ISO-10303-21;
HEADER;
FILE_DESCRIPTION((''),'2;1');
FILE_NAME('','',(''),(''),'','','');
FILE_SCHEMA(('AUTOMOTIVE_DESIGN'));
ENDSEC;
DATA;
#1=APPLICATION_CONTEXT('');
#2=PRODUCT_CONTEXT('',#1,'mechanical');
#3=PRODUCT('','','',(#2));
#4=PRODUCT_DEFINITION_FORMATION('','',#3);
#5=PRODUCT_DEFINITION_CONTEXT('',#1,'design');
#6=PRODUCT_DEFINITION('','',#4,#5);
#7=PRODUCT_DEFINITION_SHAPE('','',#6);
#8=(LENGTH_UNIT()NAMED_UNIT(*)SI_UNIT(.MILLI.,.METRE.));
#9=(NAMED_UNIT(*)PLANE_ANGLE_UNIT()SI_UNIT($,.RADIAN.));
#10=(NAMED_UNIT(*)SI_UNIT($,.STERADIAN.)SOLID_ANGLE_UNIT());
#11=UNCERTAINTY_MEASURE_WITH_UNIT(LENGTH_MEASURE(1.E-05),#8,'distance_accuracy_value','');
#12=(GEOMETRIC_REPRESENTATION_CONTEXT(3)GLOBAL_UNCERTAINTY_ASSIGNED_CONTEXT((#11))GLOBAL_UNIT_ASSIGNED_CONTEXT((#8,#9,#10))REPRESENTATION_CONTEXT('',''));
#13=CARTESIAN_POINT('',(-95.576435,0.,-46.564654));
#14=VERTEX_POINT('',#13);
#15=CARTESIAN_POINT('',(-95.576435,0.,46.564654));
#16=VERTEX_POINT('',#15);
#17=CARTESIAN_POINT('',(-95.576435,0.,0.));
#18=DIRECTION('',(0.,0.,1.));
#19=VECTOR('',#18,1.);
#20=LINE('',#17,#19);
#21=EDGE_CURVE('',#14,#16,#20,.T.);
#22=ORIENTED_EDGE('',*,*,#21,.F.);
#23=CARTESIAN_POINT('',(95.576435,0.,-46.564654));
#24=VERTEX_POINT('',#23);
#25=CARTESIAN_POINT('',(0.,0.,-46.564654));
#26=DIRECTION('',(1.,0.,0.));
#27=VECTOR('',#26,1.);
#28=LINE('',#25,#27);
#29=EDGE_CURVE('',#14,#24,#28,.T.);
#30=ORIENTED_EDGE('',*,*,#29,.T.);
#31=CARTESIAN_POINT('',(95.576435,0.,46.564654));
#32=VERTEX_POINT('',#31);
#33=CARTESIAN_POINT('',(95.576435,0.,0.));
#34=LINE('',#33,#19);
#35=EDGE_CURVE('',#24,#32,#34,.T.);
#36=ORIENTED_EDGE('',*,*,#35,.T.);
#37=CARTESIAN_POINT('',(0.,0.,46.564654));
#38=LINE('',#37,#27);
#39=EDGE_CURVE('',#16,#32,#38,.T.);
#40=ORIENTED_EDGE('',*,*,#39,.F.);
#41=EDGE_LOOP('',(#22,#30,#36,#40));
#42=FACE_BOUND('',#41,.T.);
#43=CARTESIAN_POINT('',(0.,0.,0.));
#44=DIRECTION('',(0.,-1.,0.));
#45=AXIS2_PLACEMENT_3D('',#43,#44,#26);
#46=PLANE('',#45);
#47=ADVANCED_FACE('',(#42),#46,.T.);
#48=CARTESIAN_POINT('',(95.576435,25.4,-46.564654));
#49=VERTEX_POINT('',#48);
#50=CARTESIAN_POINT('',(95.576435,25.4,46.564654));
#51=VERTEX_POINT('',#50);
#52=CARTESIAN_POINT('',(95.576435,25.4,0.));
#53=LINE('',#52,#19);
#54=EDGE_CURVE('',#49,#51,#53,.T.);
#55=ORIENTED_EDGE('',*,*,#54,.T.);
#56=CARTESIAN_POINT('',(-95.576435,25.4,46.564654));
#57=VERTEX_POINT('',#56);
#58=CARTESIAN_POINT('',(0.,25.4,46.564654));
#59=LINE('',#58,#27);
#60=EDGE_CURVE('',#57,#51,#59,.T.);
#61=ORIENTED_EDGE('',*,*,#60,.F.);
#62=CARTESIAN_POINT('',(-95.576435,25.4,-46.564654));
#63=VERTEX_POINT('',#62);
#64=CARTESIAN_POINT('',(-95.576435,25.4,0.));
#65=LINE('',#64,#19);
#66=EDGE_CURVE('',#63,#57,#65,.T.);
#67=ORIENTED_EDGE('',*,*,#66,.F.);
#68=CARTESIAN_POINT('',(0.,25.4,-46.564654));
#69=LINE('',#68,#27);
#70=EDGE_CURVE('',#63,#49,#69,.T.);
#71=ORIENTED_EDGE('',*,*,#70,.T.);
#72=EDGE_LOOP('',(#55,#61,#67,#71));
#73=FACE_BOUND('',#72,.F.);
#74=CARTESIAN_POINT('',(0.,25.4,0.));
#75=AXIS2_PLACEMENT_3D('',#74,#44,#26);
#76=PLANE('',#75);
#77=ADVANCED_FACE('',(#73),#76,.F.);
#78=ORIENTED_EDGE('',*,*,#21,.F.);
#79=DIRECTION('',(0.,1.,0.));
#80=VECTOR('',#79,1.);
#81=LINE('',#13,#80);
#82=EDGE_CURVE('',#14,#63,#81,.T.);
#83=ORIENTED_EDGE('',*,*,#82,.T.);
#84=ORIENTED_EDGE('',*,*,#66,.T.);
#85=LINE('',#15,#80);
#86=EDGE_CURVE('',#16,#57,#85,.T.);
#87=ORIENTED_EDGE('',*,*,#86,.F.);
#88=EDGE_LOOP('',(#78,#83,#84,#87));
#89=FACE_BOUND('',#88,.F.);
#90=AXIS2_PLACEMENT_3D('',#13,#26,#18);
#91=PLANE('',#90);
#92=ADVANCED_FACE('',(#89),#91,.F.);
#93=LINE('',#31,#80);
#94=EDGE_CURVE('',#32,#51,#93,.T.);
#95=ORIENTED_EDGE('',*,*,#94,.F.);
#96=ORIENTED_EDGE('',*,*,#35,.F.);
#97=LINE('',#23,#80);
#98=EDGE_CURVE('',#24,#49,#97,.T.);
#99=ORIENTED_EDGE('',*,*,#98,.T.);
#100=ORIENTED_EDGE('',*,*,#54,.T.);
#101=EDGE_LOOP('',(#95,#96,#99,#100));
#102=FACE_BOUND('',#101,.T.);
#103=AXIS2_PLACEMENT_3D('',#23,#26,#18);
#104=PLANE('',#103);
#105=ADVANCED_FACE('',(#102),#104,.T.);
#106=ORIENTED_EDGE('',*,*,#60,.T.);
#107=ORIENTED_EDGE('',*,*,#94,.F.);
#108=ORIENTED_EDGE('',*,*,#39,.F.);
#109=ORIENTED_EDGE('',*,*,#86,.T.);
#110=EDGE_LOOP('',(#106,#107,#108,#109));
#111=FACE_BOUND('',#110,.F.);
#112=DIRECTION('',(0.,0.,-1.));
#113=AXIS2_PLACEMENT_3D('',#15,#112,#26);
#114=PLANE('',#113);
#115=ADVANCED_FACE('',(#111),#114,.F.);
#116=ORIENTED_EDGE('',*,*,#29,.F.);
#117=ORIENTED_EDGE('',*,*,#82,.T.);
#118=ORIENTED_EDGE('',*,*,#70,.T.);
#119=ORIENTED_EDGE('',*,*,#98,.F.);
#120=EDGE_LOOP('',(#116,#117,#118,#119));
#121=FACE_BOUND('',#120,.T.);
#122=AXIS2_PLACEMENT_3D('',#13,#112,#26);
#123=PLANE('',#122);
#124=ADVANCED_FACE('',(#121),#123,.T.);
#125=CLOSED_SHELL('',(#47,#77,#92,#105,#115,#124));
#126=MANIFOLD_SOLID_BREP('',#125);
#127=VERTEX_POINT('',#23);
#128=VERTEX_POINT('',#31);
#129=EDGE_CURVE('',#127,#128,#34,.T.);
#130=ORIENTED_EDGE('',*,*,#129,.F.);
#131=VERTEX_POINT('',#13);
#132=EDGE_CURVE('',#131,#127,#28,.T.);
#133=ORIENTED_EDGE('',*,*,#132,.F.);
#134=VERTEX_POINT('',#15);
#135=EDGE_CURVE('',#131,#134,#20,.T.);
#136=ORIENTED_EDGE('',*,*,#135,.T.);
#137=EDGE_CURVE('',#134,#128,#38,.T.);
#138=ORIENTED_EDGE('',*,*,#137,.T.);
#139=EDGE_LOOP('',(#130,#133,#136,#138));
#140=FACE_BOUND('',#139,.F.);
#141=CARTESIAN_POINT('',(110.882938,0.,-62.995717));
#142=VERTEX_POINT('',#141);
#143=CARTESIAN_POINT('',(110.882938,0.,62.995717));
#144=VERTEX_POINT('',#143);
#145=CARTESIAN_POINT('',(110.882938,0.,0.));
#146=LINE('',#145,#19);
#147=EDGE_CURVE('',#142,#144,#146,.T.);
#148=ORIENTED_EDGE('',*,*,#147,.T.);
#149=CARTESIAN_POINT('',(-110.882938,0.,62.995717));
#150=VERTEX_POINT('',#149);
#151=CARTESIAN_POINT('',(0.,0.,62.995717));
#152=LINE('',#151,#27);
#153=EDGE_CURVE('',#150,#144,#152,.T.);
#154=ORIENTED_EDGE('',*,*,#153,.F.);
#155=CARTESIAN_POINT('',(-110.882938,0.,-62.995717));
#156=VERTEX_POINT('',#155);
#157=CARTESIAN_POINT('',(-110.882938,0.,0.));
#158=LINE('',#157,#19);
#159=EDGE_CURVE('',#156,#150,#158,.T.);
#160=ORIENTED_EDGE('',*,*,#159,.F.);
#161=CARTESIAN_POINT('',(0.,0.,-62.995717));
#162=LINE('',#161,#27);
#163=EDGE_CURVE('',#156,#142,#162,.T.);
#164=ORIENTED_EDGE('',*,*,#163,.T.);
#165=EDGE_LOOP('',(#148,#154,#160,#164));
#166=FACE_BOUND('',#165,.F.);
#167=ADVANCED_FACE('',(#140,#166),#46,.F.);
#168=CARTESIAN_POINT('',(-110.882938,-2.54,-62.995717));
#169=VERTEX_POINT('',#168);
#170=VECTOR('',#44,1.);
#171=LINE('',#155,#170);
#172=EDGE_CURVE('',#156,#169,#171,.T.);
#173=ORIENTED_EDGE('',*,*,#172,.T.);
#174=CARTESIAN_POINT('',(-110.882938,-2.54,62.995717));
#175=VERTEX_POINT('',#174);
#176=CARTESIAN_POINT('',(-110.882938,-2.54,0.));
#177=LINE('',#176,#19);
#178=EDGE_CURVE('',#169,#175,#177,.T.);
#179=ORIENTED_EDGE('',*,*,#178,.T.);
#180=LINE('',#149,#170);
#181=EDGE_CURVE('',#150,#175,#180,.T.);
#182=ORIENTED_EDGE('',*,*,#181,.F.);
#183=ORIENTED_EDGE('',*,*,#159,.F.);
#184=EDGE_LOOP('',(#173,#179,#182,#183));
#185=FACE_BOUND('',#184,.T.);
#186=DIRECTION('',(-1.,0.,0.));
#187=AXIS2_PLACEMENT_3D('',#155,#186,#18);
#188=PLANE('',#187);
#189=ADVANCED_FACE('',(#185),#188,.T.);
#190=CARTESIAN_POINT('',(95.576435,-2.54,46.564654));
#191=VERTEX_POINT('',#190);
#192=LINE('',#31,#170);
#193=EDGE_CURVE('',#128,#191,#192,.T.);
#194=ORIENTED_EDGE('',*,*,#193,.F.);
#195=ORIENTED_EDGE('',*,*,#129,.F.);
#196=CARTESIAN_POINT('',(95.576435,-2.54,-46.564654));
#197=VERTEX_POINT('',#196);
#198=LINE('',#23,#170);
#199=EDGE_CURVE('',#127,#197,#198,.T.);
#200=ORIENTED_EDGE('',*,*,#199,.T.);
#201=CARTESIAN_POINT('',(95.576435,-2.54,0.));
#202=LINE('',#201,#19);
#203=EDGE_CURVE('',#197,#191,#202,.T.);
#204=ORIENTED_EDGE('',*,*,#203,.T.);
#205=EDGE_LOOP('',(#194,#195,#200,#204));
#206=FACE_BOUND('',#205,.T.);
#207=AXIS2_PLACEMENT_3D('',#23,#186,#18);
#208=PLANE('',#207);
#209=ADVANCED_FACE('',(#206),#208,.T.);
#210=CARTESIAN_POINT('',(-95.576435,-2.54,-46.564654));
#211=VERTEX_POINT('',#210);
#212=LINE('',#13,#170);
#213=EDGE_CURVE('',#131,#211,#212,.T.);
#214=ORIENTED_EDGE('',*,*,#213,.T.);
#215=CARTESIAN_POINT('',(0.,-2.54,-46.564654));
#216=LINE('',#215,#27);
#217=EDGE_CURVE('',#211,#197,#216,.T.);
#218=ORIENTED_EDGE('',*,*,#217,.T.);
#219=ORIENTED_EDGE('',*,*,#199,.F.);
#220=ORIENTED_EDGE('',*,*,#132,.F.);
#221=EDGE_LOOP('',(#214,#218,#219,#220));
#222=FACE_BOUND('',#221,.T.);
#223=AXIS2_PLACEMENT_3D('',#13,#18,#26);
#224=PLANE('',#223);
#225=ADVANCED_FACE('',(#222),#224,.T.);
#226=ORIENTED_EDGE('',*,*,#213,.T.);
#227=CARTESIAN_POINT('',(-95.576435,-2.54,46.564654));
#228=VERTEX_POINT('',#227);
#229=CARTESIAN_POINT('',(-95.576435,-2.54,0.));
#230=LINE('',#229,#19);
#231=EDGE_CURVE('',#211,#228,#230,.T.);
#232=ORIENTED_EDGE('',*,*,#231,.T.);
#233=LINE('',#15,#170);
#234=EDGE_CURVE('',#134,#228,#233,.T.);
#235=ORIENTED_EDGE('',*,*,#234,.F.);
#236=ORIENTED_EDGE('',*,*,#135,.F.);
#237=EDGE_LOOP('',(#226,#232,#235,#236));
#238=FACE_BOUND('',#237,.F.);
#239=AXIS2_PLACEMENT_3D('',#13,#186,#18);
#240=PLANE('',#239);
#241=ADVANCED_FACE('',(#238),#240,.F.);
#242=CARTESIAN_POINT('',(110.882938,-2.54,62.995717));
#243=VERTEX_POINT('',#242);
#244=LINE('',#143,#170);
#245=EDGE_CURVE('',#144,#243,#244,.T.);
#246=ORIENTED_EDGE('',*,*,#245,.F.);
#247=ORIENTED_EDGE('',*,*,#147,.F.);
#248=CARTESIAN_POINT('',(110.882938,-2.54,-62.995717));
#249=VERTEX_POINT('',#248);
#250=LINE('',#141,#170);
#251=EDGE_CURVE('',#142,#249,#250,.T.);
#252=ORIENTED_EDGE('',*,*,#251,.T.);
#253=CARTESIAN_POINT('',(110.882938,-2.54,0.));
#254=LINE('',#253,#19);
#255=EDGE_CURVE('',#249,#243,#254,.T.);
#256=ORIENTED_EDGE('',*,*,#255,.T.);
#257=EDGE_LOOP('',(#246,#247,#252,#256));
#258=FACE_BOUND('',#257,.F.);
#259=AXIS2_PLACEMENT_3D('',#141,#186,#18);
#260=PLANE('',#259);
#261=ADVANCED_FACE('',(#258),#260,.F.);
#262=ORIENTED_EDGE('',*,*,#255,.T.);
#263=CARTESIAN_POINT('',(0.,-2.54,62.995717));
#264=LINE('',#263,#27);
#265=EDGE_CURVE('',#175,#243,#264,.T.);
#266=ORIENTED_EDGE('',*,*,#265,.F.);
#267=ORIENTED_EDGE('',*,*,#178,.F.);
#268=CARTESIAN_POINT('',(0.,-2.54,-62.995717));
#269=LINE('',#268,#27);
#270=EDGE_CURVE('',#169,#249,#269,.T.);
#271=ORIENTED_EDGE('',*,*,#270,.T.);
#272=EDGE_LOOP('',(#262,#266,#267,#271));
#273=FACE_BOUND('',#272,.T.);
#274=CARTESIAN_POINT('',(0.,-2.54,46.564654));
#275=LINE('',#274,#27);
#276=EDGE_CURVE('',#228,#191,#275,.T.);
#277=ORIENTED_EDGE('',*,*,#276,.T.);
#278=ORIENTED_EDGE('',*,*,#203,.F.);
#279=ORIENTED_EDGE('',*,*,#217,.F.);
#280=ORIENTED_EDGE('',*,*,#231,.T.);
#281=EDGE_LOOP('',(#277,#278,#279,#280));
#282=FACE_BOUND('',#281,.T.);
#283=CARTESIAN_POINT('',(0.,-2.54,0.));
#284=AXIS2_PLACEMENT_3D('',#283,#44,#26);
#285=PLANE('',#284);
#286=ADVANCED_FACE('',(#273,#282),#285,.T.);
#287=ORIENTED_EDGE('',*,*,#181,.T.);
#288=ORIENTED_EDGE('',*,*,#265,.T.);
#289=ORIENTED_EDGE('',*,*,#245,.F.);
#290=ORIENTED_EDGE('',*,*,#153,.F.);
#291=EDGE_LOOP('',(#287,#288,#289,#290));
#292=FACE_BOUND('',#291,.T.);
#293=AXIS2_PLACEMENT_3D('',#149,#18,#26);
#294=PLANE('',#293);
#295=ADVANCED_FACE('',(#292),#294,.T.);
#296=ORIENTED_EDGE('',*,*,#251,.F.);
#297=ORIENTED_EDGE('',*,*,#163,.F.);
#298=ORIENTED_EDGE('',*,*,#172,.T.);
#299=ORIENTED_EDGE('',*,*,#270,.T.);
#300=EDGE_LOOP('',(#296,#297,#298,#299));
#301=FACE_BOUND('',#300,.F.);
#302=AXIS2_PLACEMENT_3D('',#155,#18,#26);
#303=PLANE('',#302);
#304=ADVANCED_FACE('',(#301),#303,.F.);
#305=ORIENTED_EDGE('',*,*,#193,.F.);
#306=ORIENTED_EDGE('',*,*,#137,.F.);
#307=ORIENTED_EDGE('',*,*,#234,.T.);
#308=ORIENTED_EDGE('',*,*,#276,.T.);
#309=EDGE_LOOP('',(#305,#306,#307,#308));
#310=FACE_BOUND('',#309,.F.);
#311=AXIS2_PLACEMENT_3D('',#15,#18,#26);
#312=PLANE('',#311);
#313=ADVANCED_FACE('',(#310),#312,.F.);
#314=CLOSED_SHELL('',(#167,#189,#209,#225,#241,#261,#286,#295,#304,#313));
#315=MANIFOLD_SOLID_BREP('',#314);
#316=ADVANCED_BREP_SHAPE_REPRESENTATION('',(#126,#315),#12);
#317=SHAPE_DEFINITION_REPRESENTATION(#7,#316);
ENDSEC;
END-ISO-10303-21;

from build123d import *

# Parameters (mm, degrees)
F3_W     = 191.1528706551
F3_H     = 93.1293070316
F0_DEPTH = 25.4
F3_W_2   = 221.7658758163
F3_H_2   = 125.9914338589
F1_DEPTH = 2.54


# Not quite as in the source:
# - a feature of the source that left no trace in its solid (it failed there, or was rolled back) is left out


with BuildPart() as f0:
    # F3 (on Front) → F0 (new body)
    with BuildSketch(Plane.XZ):
        Rectangle(F3_W, F3_H)
    extrude(amount=-F0_DEPTH)


with BuildPart() as f1:
    # F3 (on Front) → F1 (new body)
    with BuildSketch(Plane.XZ):
        Rectangle(F3_W_2, F3_H_2)
        Rectangle(F3_W, F3_H, mode=Mode.SUBTRACT)
    extrude(amount=F1_DEPTH)


solid = Compound([f0.part, f1.part])
